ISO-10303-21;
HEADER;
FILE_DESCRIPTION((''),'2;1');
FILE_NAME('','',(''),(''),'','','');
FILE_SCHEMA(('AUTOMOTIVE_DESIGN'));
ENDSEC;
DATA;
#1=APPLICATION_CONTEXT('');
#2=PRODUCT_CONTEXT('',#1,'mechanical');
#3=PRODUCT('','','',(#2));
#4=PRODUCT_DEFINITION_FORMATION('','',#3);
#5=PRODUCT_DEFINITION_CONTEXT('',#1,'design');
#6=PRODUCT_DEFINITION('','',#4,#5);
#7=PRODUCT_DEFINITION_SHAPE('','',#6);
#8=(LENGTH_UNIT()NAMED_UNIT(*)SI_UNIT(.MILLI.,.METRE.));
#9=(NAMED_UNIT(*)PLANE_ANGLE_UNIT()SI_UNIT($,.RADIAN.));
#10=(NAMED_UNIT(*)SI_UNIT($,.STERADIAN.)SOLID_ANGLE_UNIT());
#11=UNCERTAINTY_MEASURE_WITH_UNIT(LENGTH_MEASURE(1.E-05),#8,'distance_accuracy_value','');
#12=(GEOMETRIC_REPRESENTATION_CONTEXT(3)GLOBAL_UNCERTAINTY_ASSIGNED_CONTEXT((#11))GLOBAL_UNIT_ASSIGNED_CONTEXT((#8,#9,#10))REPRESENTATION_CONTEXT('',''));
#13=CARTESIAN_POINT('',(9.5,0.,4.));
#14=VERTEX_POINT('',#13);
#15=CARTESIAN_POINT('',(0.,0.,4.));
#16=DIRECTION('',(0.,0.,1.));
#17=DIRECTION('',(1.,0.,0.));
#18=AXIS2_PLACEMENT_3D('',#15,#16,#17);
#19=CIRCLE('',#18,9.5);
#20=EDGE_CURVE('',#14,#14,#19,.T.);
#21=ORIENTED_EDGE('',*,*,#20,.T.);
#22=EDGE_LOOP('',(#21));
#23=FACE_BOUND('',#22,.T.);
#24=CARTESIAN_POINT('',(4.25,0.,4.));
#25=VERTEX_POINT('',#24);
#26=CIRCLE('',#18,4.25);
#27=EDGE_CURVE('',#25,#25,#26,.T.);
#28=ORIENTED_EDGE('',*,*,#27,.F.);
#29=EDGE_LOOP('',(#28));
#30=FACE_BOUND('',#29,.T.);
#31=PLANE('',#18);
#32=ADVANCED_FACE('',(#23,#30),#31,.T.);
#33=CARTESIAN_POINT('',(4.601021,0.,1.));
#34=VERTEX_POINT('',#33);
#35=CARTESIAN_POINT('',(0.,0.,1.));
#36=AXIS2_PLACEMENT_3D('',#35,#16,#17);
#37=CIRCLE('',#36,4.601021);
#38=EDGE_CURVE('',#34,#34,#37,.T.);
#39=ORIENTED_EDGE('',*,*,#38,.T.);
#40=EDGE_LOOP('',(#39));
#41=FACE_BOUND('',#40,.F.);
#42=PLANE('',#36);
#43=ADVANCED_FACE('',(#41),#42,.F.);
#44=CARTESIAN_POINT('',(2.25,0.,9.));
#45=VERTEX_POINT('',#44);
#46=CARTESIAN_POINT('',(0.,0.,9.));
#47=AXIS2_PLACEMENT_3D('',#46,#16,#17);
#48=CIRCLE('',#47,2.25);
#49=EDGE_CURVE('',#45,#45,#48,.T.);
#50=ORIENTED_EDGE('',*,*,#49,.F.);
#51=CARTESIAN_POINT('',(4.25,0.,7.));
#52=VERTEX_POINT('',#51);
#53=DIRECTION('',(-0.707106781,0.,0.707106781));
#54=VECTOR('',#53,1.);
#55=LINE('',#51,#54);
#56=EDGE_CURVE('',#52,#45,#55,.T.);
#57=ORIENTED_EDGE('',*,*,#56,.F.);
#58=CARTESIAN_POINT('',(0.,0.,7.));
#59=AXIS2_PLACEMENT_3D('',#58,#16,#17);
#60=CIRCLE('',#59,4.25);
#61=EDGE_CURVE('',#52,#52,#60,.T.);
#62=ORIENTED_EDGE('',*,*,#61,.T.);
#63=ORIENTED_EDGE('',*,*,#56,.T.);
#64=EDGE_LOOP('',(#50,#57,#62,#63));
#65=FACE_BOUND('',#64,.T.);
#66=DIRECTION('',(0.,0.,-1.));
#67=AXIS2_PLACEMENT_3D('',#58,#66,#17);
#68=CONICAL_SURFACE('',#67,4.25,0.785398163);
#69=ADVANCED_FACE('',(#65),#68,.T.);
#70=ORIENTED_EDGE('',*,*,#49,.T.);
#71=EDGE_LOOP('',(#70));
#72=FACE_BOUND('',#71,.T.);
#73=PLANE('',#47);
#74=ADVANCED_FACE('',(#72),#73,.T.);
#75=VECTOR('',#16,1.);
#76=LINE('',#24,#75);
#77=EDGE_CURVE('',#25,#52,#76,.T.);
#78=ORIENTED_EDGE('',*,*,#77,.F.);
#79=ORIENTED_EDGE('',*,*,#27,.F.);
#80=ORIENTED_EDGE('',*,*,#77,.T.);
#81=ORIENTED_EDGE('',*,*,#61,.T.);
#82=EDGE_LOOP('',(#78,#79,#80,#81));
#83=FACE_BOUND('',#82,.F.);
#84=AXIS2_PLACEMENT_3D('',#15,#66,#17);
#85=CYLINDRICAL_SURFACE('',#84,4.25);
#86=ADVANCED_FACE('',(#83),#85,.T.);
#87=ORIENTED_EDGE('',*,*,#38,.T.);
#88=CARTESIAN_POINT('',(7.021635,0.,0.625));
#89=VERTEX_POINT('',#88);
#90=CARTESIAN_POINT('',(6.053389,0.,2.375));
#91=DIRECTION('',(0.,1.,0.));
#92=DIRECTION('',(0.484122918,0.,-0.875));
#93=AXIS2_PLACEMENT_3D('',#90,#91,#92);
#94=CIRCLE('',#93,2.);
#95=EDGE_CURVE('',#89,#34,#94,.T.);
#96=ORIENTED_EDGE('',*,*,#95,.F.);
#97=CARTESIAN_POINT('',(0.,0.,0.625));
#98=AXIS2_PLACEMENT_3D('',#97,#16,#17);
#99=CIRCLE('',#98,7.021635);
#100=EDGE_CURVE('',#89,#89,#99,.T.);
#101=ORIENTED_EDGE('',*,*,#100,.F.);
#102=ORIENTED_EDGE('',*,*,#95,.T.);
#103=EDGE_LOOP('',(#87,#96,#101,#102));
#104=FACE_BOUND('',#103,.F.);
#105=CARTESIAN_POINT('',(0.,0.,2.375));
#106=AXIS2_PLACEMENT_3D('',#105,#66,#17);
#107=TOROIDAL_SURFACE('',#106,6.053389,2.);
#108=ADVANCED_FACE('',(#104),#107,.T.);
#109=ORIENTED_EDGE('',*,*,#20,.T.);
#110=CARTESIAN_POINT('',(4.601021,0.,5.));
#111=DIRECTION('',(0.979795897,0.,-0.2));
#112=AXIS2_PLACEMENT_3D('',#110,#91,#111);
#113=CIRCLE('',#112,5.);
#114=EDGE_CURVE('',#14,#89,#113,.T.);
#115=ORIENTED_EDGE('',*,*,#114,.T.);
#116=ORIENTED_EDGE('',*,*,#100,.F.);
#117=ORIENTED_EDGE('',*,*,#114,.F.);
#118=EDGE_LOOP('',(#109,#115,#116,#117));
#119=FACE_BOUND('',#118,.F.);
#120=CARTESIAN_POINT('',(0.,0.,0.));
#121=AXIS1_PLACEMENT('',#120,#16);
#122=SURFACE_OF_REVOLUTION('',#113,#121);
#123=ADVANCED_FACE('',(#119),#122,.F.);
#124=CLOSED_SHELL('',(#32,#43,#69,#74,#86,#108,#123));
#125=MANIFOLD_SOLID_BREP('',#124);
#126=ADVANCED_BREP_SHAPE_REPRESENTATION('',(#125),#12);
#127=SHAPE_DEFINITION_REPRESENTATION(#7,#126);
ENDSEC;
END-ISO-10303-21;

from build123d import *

# Parameters (mm, degrees)
F0_R     = 9.5
F1_DEPTH = 4
F2_R     = 4.25
F3_DEPTH = 5
F5_SIZE  = 2
F6_DEPTH = 1


# Not quite as in the source:
# - a fillet or chamfer that OpenCascade refuses, or shapes differently, is made with other operations: its cross-section is extruded or revolved along the edge and cut away or added


with BuildPart() as f1:
    # F0 (on Top) → F1 (new body)
    with BuildSketch(Plane.XY):
        Circle(F0_R)
    extrude(amount=F1_DEPTH)

    # F2 (on face) → F3 (join)
    with BuildSketch(Plane.XY.offset(4)):
        Circle(F2_R)
    extrude(amount=F3_DEPTH)

    # F4: fillet of radius 5 on 1 edges, made by hand

    # F4_s1 → F4_t2 (revolve, cut)
    with BuildSketch(Plane.XZ):
        with BuildLine():
            ThreePointArc((9.5, 4), (7.7632981746, 1.1270166538), (4.6010205144, 0))
            Line((4.6010205144, 0), (9.5, 0))
            Line((9.5, 0), (9.5, 4))
        make_face()
    revolve(axis=Axis((0, 0, 0), (0, 0, 1)), mode=Mode.SUBTRACT)

    # F5
    f5_edges = [f1.edges().sort_by_distance(p)[0] for p in [
        (-4.25, 0, 9),
    ]]
    chamfer(f5_edges, length=F5_SIZE)

    # F6 (cut): a face of the model
    f6_faces = [f1.faces().sort_by_distance(p)[0] for p in [
        (0, 0, 0),
    ]]
    extrude(f6_faces, amount=-F6_DEPTH, mode=Mode.SUBTRACT)

    # F7: fillet of radius 2 on 1 edges, made by hand

    # F7_s1 → F7_t2 (revolve, cut)
    with BuildSketch(Plane.XZ):
        with BuildLine():
            ThreePointArc((7.0216351058, 0.625), (5.7472030514, 0.3985764624), (4.6010205144, 1))
            Line((4.6010205144, 1), (4.6010205144, 0))
            ThreePointArc((4.6010205144, 0), (5.8510205144, 0.1587708172), (7.0216351058, 0.625))
        make_face()
    revolve(axis=Axis((0, 0, 0), (0, 0, 1)), mode=Mode.SUBTRACT)


solid = f1.part
